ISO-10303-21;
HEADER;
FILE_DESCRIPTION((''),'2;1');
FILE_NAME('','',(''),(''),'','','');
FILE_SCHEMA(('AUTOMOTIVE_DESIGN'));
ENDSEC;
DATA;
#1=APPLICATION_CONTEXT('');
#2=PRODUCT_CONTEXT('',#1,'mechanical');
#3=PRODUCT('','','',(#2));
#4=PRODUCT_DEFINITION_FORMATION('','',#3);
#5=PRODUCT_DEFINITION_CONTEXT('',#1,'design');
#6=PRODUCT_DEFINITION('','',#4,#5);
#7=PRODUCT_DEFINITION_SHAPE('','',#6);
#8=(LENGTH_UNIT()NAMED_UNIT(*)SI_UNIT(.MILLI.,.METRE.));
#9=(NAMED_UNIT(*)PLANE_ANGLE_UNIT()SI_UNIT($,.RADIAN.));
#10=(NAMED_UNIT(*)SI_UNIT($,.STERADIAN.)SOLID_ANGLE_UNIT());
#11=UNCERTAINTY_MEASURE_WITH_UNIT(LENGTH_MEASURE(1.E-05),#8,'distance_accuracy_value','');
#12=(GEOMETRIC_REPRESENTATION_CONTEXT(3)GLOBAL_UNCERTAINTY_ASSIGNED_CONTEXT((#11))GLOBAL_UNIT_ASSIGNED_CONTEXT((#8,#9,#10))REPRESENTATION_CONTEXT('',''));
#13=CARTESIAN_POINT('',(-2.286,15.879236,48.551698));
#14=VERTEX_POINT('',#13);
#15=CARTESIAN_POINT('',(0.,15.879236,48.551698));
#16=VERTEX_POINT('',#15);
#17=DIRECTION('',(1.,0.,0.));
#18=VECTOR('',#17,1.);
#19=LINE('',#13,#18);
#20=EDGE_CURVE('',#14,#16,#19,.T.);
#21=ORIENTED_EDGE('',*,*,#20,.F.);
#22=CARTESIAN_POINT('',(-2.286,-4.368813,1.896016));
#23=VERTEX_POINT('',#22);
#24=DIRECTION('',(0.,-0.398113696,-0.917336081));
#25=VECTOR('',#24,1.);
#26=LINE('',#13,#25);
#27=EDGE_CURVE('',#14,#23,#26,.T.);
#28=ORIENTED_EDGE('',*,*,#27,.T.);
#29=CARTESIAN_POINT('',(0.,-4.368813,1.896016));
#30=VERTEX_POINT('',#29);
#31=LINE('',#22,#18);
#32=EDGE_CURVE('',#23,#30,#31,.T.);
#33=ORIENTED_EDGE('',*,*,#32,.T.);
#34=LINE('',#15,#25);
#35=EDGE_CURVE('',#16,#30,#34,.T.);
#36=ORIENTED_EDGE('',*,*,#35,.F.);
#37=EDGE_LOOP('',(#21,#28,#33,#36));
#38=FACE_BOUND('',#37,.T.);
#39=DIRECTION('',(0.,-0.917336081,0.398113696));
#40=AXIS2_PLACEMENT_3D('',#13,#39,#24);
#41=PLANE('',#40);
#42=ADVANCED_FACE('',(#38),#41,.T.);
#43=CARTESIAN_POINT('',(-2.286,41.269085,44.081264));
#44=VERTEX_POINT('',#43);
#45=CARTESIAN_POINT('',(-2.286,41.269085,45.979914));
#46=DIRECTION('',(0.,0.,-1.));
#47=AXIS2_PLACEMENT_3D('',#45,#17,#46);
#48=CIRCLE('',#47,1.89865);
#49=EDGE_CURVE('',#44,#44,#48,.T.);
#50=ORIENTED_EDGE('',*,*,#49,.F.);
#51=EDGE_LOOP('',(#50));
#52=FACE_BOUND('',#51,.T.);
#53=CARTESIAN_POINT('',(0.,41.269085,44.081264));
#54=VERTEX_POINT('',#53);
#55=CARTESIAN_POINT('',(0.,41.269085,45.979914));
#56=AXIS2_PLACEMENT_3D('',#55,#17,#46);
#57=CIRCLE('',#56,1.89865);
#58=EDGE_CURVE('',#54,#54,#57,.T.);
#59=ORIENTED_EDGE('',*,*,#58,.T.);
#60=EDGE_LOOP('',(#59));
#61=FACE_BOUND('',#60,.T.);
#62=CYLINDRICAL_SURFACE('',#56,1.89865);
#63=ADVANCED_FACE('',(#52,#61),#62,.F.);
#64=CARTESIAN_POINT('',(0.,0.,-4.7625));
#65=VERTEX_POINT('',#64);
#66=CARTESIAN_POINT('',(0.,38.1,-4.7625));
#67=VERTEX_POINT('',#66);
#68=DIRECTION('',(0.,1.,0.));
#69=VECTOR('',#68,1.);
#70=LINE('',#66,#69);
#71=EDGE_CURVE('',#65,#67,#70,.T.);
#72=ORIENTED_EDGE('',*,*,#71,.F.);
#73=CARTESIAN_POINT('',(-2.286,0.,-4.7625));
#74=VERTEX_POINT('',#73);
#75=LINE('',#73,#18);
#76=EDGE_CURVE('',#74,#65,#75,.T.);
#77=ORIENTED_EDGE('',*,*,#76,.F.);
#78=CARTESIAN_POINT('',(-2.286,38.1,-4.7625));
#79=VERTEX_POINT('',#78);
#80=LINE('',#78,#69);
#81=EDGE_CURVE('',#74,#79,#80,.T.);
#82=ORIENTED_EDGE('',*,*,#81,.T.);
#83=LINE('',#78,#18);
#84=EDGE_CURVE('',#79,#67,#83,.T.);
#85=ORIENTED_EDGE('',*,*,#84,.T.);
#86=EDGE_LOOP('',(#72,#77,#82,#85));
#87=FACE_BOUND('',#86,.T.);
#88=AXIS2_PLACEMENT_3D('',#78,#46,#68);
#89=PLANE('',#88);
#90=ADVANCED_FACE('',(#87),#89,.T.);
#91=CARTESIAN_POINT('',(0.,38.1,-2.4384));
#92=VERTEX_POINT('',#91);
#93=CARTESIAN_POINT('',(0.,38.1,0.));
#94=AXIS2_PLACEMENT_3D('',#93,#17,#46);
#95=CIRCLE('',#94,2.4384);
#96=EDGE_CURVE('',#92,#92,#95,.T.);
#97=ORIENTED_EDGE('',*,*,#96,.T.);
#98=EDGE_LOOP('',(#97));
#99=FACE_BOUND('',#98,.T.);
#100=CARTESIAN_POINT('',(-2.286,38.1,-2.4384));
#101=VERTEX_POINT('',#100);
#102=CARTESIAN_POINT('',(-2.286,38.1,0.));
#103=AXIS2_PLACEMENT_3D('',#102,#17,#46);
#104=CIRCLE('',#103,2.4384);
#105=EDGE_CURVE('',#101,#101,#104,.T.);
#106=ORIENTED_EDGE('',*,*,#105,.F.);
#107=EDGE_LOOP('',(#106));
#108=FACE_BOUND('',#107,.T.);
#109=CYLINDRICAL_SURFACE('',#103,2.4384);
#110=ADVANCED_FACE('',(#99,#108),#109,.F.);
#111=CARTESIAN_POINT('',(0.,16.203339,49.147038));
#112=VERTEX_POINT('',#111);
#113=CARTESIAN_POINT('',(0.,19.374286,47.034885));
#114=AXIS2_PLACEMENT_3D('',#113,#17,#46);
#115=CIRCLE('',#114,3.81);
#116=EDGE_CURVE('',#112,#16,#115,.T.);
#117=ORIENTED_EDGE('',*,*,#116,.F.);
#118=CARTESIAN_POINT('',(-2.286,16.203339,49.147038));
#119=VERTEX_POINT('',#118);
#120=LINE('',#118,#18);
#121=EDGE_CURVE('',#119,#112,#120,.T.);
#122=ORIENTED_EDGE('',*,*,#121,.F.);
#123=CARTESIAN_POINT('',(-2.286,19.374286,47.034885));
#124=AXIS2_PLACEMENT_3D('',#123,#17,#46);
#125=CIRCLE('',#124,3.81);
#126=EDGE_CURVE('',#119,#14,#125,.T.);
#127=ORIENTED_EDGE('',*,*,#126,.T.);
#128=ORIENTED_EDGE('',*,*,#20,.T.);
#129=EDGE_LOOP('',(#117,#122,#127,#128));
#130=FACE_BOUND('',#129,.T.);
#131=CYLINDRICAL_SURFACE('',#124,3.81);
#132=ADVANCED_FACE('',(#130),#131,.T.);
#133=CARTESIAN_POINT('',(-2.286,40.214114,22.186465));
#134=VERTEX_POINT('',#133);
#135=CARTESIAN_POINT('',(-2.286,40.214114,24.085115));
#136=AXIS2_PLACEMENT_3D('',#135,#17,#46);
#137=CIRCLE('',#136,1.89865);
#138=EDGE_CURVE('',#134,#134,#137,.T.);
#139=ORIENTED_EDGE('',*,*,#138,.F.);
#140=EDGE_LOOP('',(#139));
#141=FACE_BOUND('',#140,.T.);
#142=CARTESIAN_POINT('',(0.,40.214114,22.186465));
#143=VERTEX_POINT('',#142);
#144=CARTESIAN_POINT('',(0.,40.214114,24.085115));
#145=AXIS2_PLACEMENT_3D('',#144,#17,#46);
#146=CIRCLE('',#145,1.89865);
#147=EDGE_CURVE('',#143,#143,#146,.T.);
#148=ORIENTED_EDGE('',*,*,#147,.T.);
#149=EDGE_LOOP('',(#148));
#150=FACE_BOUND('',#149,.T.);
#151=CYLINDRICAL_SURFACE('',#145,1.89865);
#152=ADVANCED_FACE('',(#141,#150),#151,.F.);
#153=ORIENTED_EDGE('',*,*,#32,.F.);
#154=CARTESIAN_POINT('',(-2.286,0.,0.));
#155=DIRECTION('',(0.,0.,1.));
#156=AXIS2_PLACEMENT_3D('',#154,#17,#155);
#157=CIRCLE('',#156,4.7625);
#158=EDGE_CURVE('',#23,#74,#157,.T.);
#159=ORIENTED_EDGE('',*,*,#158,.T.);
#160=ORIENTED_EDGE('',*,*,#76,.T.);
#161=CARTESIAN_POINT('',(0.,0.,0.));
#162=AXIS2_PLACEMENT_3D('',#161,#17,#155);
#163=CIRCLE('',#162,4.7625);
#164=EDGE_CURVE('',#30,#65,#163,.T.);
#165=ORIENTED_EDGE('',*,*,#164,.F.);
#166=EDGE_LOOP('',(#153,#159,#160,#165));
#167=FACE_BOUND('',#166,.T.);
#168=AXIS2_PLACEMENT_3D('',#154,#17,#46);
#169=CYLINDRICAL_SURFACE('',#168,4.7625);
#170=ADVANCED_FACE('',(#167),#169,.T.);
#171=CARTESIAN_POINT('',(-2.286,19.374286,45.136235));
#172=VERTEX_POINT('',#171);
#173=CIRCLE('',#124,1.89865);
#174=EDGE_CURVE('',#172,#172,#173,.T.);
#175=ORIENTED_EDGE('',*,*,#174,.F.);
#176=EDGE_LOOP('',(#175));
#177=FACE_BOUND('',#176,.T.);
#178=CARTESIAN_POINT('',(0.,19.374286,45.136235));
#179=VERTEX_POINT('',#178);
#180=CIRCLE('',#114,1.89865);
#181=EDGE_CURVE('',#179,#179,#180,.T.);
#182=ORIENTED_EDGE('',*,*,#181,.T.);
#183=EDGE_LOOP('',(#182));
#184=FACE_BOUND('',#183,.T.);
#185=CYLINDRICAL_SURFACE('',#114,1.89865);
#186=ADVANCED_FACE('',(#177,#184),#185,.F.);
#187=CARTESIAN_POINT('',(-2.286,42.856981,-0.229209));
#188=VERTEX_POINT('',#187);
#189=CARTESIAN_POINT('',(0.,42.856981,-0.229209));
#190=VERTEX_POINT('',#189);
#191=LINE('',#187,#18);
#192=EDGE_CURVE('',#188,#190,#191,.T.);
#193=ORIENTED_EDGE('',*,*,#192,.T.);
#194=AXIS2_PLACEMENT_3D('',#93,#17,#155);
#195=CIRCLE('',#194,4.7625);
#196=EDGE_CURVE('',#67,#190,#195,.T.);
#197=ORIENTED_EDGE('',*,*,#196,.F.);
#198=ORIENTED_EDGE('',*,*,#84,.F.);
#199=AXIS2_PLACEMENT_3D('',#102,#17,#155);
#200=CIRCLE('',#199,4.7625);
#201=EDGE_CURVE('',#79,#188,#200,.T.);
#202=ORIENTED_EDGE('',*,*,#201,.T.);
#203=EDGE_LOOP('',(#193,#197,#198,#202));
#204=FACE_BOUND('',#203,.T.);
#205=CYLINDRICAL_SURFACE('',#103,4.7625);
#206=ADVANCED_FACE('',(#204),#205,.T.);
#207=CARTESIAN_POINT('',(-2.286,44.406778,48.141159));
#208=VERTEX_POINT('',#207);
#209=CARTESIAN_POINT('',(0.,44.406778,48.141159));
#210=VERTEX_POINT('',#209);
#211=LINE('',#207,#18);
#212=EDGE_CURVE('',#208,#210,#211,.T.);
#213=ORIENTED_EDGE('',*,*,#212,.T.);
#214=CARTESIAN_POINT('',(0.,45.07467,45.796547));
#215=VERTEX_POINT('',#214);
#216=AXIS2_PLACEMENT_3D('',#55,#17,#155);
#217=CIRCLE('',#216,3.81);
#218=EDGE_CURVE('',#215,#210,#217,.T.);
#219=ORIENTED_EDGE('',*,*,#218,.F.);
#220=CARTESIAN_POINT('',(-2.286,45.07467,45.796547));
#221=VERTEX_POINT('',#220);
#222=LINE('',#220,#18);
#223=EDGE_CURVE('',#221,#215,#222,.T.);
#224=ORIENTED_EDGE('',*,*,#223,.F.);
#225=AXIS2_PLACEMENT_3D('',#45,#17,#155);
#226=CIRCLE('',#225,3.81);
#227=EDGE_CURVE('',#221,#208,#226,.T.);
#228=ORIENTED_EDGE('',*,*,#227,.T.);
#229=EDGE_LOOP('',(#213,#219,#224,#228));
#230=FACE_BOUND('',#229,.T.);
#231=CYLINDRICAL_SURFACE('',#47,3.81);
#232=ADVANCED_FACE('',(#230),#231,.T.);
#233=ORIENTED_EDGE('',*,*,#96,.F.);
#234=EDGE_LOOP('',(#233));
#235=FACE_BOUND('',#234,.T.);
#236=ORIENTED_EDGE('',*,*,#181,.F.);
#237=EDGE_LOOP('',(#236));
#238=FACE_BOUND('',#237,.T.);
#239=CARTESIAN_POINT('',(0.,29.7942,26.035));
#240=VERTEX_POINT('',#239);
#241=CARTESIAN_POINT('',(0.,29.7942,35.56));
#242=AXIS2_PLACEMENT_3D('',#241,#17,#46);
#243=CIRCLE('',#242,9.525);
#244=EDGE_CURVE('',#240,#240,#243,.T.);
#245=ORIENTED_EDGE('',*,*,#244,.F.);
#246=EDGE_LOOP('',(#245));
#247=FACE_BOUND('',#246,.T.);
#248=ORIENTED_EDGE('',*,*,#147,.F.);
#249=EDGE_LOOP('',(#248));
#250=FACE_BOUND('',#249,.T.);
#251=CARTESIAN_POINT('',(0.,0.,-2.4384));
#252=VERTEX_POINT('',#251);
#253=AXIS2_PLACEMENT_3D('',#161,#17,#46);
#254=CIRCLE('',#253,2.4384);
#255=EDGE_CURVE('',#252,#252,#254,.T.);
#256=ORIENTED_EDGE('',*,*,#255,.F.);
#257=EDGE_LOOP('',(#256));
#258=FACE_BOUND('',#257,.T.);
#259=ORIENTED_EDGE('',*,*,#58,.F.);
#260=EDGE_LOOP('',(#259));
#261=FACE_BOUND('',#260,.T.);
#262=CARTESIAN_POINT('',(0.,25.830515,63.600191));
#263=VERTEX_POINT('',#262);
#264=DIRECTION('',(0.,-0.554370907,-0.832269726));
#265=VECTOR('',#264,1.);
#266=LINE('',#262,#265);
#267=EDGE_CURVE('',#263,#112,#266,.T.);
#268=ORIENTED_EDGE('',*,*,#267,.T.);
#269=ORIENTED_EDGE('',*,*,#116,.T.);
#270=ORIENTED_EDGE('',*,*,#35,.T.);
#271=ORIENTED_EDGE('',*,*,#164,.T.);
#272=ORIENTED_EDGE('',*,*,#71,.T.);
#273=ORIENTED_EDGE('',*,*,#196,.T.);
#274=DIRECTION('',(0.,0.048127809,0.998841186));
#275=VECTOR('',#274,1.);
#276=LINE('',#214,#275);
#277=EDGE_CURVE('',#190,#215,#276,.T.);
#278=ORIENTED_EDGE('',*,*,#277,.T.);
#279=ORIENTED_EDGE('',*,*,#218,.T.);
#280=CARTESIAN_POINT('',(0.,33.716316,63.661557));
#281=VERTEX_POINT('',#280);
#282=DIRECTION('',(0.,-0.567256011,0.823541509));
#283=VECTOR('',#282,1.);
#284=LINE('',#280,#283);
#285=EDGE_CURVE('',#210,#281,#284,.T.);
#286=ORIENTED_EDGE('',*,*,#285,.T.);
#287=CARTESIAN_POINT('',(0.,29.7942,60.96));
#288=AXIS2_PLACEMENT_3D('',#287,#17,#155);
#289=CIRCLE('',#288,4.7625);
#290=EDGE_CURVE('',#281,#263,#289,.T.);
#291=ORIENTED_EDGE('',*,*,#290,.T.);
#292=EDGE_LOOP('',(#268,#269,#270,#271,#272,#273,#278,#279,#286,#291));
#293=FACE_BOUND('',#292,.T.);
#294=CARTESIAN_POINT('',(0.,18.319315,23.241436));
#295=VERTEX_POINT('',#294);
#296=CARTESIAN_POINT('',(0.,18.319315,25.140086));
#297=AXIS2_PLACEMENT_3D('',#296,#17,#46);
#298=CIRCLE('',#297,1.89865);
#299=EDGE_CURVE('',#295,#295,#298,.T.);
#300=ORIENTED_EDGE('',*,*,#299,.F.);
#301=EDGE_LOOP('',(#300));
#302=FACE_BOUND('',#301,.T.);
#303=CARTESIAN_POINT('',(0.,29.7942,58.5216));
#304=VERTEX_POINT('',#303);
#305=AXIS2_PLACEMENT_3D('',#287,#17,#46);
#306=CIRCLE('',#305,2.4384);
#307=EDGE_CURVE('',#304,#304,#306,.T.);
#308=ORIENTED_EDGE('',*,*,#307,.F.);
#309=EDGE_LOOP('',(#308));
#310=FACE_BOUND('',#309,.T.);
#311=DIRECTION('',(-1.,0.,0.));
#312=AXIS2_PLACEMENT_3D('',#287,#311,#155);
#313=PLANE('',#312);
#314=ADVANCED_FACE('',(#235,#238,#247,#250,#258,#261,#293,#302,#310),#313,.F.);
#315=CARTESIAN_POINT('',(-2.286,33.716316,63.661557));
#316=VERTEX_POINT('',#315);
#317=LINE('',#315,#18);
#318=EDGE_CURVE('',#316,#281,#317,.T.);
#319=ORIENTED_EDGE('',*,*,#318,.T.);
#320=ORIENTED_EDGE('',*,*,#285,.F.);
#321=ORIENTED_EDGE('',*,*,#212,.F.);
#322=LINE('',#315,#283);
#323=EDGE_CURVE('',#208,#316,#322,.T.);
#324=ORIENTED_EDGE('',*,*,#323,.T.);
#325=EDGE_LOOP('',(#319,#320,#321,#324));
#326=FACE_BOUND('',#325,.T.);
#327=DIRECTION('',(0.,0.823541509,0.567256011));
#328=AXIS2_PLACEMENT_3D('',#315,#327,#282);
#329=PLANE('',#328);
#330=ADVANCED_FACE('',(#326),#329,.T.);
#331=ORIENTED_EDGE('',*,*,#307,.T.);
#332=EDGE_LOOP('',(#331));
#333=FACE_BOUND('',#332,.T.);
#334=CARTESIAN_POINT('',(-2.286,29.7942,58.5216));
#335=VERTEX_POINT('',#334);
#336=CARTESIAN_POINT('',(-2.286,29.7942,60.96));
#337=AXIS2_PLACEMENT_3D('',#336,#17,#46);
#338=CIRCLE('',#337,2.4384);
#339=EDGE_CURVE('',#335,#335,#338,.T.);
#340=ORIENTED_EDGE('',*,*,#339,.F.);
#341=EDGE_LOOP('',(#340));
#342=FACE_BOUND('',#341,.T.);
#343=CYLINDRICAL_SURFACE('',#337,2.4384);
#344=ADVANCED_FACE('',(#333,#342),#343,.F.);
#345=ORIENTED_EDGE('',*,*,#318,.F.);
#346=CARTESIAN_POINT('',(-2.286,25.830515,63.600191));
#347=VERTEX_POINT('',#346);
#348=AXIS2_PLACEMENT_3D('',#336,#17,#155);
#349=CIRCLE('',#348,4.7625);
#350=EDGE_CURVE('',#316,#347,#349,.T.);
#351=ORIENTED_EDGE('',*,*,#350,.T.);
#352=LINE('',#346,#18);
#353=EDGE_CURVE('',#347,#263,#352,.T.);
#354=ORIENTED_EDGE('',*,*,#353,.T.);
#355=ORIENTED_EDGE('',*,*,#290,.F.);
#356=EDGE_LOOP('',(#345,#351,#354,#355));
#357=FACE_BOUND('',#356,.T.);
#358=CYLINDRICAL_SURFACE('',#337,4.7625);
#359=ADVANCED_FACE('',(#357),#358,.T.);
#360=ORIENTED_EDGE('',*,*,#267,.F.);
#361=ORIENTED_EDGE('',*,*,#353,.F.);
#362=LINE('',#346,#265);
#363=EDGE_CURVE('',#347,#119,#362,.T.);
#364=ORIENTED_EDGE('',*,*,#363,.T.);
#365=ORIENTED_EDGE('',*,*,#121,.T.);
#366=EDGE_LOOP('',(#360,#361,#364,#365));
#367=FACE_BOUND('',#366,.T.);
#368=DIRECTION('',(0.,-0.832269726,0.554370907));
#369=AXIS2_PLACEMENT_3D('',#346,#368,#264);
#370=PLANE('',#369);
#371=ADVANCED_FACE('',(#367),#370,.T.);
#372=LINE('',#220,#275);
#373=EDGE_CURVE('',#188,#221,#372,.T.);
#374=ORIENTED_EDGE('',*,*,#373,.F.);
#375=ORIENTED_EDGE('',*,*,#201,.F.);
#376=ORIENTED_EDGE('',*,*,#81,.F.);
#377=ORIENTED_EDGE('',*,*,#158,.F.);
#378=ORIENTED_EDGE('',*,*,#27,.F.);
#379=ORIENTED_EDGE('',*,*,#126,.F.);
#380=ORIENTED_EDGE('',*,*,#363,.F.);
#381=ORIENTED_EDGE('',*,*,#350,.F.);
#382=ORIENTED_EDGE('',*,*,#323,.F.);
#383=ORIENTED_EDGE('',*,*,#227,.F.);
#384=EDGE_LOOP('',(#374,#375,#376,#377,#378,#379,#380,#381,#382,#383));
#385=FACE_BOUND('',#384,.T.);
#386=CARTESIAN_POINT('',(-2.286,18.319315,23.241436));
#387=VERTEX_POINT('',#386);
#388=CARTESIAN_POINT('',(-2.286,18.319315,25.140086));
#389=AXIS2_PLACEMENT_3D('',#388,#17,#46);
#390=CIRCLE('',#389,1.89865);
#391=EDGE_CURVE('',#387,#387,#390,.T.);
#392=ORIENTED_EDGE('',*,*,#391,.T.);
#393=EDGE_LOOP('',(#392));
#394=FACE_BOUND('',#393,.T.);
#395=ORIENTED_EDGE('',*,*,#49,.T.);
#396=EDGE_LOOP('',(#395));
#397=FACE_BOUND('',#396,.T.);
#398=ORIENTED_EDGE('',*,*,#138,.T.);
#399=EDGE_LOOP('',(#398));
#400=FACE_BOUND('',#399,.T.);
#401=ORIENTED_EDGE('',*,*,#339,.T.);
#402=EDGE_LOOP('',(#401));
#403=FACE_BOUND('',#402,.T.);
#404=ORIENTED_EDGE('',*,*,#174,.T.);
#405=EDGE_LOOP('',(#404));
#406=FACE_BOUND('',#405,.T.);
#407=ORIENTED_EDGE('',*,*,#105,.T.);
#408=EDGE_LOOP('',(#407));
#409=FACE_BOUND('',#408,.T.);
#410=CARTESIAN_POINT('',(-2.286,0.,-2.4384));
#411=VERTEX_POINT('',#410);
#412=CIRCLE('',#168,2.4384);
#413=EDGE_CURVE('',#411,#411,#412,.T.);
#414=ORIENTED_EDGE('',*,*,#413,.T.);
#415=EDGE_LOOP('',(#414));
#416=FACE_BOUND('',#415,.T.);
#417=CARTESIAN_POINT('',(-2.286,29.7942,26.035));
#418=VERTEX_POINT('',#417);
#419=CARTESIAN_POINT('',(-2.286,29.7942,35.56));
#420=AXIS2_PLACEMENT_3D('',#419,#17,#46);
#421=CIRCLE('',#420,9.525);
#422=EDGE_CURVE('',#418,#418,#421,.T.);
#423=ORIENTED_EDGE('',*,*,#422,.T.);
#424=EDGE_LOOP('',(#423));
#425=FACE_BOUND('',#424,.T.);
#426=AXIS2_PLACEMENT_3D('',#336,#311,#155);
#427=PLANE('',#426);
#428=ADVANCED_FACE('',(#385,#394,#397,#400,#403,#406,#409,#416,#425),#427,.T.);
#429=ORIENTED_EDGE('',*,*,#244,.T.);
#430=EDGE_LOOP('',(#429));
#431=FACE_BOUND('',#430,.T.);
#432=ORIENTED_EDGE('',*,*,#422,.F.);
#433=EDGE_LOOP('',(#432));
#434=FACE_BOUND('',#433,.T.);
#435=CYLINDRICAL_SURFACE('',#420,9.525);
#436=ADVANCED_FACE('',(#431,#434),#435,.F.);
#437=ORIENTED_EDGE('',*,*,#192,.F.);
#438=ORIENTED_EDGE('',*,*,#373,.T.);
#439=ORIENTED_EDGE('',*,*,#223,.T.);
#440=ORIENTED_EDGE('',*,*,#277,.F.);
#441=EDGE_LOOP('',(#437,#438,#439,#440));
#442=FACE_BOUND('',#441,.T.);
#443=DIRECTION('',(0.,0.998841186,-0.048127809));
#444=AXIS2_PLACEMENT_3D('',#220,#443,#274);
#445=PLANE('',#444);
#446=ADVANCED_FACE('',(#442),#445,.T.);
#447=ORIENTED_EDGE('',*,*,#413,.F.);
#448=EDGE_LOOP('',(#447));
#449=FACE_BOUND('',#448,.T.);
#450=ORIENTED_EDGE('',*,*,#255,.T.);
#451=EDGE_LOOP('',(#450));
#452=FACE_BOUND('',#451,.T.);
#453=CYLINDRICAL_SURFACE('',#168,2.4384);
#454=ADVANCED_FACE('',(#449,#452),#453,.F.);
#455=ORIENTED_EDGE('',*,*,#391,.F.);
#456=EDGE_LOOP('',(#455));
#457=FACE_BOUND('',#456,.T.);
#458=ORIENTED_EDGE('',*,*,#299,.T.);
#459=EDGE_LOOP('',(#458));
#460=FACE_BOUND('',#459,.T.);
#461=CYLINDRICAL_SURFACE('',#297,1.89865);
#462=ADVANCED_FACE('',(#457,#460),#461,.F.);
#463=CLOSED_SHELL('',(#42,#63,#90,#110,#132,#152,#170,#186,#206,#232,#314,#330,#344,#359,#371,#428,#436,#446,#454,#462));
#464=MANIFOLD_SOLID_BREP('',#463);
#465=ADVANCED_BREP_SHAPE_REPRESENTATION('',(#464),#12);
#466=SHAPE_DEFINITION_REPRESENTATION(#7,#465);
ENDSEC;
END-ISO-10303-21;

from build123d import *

# Parameters (mm, degrees)
SKETCH1_R             = 2.4384
SKETCH1_R_2           = 9.525
BASE_FLANGE1_DEPTH    = 2.286
F_6_CLEARANCE_HOLE1_D = 3.7973


# Sheet-metal steps are written as plain solids
with BuildPart() as part:
    # Sketch1 → Base-Flange1 (new body)
    with BuildSketch(Plane(origin=(0, 0, 0), x_dir=(0, 0, -1), z_dir=(1, 0, 0))):
        with BuildLine():
            Line((4.7625, 38.1), (4.7625, 0))
            ThreePointArc((4.7625, 0), (2.61262586, -3.981908131), (-1.896016479, -4.368813084))
            Line((-1.896016479, -4.368813084), (-48.551698058, 15.879235852))
            ThreePointArc((-48.551698058, 15.879235852), (-48.856590074, 16.028021212), (-49.147038032, 16.203338662))
            Line((-49.147038032, 16.203338662), (-63.600191446, 25.830515429))
            ThreePointArc((-63.600191446, 25.830515429), (-65.722355809, 29.757140553), (-63.661556753, 33.716316439))
            Line((-63.661556753, 33.716316439), (-48.141159083, 44.406778026))
            ThreePointArc((-48.141159083, 44.406778026), (-47.023714737, 44.933314584), (-45.796546729, 45.074669792))
            Line((-45.796546729, 45.074669792), (0.229208689, 42.856981146))
            ThreePointArc((0.229208689, 42.856981146), (3.447681296, 41.385559303), (4.7625, 38.1))
        make_face()
        with Locations((0, 38.1)):
            Circle(SKETCH1_R, mode=Mode.SUBTRACT)
        Circle(SKETCH1_R, mode=Mode.SUBTRACT)
        with Locations((-60.96, 29.7942)):
            Circle(SKETCH1_R, mode=Mode.SUBTRACT)
        with Locations((-35.56, 29.7942)):
            Circle(SKETCH1_R_2, mode=Mode.SUBTRACT)
    extrude(amount=-BASE_FLANGE1_DEPTH)

    # #6 Clearance Hole1 (through all)
    with Locations(Plane(origin=(0, 0, 0), x_dir=(0, 0, -1), z_dir=(1, 0, 0))):
        with Locations((-24.085115125, 40.214113681), (-45.979913681, 41.269084875), (-25.140086319, 18.319315125), (-47.034884875, 19.374286319)):
            Hole(F_6_CLEARANCE_HOLE1_D / 2)


solid = part.part
